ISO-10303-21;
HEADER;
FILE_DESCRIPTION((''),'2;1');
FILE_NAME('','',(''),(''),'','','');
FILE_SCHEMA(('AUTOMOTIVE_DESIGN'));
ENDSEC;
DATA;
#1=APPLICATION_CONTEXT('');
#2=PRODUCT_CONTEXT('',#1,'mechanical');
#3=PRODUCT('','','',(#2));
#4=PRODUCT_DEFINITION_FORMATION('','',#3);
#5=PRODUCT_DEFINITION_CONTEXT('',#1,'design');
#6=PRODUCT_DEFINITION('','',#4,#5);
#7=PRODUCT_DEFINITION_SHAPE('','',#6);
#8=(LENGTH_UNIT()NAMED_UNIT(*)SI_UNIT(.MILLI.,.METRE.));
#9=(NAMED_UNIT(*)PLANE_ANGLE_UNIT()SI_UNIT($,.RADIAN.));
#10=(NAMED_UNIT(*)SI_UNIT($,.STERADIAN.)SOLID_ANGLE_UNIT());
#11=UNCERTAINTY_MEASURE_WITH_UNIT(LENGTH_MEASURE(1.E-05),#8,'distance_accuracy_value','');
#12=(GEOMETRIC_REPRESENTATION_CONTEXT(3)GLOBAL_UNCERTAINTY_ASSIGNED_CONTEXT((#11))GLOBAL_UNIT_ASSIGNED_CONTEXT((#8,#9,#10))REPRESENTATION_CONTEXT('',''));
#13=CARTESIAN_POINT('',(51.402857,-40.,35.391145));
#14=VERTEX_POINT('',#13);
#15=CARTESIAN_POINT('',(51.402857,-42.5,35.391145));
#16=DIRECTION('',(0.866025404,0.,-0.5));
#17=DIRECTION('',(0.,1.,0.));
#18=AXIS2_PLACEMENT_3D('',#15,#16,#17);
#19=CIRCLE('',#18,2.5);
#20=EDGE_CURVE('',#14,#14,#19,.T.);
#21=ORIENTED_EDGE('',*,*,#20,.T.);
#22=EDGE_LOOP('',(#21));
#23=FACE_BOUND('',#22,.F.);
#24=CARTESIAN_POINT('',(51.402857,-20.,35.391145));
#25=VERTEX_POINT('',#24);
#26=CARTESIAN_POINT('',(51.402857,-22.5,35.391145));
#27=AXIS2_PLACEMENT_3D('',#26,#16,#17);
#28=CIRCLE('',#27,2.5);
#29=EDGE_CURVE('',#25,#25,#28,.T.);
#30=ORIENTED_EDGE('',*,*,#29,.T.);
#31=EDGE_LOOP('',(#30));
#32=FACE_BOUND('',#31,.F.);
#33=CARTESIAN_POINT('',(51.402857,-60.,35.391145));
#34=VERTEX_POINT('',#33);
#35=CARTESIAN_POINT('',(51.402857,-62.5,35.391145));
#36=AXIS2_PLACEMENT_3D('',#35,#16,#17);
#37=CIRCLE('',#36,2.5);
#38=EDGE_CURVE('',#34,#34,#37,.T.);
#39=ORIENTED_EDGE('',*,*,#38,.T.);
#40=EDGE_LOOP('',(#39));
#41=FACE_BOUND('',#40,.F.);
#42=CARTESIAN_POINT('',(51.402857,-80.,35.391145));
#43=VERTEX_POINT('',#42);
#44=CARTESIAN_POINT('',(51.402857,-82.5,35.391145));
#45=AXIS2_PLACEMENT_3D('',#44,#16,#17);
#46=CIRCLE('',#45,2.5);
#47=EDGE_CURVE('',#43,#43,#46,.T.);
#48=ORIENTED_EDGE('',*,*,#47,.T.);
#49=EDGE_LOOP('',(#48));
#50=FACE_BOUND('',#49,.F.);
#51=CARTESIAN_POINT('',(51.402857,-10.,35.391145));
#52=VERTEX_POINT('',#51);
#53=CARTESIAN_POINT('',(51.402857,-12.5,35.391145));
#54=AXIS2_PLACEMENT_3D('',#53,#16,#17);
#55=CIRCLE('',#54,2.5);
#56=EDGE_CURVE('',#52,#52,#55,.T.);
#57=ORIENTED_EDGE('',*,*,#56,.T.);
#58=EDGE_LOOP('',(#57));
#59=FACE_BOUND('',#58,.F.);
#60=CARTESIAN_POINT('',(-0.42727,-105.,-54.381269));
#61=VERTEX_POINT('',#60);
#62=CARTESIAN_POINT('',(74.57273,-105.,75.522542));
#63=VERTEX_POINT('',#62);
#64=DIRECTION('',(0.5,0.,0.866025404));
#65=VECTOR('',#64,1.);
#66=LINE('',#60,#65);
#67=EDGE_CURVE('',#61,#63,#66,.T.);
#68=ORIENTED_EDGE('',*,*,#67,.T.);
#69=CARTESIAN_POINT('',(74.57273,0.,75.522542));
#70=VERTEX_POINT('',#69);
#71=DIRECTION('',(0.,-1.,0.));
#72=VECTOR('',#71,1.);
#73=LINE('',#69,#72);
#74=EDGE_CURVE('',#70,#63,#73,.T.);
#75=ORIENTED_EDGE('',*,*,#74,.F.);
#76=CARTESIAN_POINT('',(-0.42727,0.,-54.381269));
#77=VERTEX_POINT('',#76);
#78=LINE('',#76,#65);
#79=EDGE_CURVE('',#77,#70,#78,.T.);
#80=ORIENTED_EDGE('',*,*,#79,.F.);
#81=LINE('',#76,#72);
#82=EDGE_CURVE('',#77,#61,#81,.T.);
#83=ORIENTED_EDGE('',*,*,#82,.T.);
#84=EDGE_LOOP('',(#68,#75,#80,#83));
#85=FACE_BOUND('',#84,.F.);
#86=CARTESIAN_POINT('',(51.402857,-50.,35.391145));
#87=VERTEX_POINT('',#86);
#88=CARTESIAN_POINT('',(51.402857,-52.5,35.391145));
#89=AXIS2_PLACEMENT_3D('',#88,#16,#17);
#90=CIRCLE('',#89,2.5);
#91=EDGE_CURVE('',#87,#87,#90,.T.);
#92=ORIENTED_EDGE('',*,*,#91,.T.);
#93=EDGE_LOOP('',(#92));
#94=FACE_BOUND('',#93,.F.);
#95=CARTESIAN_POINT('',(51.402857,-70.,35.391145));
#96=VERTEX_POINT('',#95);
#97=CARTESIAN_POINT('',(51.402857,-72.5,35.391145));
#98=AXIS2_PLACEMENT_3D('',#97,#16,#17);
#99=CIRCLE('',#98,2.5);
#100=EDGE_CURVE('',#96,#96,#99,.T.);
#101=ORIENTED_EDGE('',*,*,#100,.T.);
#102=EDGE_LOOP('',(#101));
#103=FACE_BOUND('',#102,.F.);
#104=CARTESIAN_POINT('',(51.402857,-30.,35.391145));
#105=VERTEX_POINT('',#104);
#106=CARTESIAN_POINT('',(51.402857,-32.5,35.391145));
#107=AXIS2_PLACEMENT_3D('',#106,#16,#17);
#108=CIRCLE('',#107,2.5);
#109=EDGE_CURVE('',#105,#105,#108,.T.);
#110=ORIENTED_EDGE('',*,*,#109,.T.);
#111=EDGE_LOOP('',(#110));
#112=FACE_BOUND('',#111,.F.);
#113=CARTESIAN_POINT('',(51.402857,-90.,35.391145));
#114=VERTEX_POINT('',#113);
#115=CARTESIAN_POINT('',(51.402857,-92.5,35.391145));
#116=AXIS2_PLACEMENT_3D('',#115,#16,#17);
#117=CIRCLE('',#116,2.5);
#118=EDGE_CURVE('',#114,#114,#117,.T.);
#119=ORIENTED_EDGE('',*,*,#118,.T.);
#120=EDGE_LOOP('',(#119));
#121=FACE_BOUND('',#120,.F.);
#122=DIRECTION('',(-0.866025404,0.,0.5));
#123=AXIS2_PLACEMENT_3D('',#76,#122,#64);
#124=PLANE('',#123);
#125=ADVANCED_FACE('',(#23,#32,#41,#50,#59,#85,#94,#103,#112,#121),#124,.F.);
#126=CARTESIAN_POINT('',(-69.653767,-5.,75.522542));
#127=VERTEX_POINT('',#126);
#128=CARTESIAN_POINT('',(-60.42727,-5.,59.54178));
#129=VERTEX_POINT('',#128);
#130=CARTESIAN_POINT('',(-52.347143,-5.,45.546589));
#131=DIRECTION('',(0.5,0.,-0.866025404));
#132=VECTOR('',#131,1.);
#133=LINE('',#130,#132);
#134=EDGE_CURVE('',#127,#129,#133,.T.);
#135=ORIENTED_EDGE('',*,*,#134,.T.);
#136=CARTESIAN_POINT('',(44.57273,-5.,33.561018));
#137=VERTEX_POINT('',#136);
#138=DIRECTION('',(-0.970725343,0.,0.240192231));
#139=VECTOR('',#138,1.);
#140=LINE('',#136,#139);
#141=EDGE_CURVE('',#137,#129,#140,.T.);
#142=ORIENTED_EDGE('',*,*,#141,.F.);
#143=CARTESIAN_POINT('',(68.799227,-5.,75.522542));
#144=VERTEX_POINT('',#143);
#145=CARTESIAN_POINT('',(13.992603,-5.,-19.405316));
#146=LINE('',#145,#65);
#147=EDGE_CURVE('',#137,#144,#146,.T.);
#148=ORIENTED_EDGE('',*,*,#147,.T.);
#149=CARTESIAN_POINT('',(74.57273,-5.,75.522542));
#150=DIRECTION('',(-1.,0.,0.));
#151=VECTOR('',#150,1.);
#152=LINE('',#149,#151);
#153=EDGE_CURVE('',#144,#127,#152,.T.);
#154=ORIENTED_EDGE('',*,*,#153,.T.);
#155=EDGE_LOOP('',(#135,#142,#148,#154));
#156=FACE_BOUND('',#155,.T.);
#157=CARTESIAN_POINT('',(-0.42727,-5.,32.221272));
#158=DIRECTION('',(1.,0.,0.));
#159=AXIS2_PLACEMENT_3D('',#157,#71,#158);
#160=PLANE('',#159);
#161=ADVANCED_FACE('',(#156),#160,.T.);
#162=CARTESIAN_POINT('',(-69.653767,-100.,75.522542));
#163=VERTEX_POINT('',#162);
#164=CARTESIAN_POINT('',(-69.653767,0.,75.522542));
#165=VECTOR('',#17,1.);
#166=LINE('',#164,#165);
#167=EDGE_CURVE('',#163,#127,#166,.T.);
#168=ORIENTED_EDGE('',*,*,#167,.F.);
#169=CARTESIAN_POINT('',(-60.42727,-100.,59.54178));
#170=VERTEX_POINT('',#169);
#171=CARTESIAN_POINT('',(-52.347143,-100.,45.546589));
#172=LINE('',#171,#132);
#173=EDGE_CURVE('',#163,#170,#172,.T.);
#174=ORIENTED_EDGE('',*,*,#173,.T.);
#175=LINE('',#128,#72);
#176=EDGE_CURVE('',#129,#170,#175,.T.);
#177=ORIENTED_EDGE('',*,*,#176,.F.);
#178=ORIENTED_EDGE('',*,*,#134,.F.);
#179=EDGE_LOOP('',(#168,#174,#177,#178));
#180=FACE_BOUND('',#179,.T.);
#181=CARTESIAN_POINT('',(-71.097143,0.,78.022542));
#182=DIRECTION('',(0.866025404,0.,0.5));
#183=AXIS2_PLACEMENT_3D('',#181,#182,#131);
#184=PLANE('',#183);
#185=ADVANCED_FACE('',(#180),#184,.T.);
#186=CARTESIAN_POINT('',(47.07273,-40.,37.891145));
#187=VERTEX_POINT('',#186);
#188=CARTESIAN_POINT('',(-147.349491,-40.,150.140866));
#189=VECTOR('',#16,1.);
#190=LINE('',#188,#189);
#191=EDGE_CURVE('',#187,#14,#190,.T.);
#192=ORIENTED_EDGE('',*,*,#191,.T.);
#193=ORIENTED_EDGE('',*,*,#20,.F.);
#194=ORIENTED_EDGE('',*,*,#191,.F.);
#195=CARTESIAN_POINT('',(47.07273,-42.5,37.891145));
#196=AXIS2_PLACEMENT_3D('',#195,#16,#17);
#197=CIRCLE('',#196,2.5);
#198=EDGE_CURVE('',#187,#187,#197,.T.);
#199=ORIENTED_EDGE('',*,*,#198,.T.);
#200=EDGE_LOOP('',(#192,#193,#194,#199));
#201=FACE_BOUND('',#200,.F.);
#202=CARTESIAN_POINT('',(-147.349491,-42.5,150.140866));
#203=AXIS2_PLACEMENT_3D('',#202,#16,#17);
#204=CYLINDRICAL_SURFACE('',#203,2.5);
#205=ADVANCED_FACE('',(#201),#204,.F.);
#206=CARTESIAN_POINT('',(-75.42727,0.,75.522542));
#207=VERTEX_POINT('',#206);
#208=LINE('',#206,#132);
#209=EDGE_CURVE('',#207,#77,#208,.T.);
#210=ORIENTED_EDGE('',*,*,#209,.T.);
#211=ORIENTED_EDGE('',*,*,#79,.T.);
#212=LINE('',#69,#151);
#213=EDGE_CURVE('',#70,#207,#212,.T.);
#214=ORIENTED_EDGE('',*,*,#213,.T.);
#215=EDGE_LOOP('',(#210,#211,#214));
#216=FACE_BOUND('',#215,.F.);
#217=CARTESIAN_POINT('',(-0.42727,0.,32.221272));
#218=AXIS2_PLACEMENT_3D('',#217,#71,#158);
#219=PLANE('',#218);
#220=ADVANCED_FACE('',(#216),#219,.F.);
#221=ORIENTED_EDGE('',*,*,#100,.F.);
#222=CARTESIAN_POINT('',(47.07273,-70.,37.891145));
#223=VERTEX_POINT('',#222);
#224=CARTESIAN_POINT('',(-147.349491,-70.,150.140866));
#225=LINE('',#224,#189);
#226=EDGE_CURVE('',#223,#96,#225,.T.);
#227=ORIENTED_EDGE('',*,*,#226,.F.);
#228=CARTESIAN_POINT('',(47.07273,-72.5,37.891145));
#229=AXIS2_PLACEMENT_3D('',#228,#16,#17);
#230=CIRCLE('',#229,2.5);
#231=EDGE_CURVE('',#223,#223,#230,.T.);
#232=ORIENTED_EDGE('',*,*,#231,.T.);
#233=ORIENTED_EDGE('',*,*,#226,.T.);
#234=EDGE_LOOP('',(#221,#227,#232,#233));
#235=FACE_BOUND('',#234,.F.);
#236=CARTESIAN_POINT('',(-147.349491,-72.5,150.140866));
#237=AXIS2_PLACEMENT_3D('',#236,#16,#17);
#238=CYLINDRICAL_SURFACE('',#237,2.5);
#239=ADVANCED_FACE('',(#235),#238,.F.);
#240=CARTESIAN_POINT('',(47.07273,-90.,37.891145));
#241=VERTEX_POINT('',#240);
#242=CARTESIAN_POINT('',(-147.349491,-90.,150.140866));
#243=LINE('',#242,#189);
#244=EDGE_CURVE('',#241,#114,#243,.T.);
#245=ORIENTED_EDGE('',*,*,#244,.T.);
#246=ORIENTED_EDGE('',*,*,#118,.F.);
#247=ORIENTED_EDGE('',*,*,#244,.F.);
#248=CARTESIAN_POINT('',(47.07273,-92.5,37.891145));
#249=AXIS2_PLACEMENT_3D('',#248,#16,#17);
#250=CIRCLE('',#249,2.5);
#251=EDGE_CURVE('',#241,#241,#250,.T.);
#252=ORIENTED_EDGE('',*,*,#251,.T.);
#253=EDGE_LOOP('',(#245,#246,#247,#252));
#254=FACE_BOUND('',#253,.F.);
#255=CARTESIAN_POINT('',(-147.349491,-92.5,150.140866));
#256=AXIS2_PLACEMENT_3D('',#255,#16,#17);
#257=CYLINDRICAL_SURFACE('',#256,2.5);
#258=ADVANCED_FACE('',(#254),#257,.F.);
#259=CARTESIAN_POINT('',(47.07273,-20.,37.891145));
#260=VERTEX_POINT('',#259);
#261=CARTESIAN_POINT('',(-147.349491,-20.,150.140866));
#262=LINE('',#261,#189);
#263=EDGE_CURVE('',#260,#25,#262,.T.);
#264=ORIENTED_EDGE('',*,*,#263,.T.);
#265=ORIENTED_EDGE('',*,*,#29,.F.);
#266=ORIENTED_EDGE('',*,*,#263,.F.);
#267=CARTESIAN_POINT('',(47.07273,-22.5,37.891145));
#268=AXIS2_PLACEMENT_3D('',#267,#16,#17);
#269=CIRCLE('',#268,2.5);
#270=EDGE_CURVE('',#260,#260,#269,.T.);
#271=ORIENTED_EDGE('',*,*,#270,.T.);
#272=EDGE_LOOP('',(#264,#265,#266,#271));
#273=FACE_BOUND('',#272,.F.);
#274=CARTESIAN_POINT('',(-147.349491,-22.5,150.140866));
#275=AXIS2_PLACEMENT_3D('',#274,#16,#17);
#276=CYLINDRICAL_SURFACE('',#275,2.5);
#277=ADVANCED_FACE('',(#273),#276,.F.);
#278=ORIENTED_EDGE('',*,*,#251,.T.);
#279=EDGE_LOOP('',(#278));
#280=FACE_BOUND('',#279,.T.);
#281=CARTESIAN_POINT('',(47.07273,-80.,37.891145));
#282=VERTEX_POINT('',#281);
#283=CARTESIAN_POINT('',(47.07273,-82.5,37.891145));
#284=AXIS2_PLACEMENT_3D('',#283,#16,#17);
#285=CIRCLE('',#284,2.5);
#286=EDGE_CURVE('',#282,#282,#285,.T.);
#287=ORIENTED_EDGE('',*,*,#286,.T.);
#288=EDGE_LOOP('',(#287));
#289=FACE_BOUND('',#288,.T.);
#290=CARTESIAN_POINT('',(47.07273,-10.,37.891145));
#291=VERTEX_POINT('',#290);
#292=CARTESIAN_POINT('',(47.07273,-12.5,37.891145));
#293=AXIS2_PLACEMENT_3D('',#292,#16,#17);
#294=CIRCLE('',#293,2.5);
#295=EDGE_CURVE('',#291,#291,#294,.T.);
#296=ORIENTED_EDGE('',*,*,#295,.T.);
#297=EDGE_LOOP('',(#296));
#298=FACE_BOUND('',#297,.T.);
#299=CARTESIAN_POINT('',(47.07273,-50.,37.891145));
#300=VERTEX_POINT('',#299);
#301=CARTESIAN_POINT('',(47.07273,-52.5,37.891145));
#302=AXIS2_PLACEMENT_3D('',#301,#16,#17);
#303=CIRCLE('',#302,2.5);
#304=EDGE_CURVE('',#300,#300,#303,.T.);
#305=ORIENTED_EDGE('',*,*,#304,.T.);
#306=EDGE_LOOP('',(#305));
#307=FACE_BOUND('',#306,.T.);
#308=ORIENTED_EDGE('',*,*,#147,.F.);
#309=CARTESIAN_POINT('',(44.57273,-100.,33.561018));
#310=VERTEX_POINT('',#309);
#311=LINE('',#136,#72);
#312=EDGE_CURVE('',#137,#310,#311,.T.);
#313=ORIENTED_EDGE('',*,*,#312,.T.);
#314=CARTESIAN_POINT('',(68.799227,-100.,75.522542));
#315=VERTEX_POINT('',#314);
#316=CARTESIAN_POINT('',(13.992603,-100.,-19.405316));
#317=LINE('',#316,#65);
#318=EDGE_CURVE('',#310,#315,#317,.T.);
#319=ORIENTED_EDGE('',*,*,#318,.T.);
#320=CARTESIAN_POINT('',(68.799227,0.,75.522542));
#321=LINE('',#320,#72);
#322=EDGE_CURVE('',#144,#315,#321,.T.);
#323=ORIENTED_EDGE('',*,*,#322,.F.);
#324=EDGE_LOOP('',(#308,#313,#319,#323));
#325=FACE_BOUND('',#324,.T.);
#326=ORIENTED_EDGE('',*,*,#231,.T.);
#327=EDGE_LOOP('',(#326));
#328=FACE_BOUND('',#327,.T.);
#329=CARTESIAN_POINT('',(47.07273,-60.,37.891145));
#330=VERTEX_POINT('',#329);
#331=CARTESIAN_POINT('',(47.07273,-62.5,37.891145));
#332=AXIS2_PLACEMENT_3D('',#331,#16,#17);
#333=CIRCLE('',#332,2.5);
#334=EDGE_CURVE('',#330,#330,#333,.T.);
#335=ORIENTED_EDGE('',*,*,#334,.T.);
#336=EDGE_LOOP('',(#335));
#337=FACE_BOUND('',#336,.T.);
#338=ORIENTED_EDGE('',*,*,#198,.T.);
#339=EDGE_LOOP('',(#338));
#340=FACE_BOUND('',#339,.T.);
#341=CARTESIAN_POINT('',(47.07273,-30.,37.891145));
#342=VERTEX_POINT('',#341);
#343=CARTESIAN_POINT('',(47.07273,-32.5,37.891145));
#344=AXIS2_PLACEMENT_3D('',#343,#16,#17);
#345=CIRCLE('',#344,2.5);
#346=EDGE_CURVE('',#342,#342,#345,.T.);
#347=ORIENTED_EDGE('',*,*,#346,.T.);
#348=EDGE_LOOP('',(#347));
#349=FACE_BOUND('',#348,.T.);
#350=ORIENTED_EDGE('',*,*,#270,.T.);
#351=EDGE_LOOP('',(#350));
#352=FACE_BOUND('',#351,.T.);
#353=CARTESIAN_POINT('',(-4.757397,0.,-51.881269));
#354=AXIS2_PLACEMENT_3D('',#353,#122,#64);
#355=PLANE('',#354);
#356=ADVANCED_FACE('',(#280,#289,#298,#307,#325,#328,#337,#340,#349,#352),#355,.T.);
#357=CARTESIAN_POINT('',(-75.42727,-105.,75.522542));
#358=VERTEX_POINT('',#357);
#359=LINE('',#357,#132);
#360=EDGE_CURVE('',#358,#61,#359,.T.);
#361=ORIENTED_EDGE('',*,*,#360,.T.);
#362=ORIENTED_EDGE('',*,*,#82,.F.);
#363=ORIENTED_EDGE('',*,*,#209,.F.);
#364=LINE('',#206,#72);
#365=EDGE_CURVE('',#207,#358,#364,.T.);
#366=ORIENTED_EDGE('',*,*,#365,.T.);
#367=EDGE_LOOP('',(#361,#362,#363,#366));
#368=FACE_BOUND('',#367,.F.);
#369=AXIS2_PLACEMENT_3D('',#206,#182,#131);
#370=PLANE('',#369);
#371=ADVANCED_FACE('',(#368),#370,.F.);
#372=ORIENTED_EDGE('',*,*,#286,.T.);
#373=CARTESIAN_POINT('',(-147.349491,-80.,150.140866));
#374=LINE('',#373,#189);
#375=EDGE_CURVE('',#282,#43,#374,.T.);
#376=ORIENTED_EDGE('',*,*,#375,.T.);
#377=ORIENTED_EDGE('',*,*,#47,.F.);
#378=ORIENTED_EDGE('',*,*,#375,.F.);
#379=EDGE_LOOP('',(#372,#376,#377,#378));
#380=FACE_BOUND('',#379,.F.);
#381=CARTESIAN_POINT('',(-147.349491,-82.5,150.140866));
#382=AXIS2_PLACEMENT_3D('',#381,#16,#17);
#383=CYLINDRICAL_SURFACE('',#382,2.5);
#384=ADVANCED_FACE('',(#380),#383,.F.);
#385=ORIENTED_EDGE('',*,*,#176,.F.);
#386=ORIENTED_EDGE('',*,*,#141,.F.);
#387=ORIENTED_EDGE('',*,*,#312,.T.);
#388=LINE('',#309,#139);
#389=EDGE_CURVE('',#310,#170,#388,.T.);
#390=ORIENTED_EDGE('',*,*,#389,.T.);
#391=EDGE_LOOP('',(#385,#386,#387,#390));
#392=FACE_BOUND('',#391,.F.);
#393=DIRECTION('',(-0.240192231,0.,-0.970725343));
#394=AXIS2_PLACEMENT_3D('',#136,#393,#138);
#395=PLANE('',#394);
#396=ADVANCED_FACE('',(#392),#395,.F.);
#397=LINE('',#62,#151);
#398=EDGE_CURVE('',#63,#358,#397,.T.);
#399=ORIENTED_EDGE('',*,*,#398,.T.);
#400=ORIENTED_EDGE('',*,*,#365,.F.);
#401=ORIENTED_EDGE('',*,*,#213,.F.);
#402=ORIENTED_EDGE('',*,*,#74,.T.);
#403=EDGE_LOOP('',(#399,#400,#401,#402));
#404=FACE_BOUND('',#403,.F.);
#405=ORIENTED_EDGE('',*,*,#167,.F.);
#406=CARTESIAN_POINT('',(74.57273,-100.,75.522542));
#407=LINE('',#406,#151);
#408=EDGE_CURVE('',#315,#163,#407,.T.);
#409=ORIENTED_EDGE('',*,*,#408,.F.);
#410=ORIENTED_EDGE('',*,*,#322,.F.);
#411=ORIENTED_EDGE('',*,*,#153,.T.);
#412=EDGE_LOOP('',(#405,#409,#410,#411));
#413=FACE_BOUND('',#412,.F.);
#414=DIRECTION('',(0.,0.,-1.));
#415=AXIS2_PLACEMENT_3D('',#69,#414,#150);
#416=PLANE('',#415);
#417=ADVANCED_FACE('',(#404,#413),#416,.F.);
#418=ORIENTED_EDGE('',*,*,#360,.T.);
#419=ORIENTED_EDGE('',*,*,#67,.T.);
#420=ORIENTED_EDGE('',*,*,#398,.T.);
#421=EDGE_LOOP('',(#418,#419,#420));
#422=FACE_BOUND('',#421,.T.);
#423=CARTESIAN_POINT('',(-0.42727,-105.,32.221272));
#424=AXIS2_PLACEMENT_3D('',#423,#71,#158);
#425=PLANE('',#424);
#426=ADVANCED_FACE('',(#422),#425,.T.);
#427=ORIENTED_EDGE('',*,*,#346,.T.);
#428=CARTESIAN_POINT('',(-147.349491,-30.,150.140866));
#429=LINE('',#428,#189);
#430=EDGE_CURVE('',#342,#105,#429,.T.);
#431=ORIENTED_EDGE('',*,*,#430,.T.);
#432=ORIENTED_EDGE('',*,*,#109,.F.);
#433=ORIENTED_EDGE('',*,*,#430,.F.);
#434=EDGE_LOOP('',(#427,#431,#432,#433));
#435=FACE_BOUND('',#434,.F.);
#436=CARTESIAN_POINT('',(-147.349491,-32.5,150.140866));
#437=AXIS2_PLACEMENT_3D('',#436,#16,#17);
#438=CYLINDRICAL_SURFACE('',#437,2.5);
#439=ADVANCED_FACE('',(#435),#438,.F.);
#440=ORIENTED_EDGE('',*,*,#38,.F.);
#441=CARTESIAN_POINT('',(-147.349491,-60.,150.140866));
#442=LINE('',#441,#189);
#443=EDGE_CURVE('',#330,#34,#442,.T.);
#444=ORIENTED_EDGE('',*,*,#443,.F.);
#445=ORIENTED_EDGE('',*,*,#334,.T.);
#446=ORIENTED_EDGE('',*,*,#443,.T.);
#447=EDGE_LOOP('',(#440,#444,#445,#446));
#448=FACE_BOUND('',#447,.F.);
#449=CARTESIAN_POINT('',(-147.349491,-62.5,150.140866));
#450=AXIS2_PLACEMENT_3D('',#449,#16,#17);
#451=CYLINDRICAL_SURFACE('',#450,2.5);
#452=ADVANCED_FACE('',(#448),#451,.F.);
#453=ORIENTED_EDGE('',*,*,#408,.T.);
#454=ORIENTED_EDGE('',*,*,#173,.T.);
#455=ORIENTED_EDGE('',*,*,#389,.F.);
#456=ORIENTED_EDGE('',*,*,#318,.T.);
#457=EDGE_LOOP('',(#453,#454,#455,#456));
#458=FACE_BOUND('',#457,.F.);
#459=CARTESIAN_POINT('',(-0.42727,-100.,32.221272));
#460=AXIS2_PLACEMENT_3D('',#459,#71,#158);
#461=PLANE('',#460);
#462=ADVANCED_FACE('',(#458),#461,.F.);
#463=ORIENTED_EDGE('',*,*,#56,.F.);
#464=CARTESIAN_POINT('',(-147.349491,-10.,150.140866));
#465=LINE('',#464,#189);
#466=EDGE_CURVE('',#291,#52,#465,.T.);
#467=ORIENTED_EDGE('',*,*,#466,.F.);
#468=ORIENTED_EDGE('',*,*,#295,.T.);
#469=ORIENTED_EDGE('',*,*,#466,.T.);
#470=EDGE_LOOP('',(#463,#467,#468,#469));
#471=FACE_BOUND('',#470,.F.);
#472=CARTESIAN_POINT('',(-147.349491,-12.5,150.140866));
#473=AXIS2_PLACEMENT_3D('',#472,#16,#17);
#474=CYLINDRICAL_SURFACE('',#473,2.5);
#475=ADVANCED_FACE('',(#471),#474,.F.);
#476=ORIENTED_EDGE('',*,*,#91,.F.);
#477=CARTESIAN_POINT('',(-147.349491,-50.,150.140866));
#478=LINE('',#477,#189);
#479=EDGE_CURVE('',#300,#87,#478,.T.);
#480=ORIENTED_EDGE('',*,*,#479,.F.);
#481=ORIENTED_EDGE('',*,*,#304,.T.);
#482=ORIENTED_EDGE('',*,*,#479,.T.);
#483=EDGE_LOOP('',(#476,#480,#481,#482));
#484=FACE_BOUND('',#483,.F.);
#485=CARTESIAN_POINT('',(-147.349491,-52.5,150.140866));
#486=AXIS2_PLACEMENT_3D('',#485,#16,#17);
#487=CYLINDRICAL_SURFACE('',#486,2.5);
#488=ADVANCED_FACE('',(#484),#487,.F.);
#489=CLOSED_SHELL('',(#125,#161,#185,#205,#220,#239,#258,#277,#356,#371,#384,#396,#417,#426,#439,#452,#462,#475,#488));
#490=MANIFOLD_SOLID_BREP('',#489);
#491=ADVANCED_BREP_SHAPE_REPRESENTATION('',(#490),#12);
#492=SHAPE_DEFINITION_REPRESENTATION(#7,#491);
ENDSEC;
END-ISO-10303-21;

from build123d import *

# Parameters (mm, degrees)
F1_DEPTH = 105
F2_T     = -5
F4_DEPTH = 95
F6_D     = 5


with BuildPart() as f1:
    # F0 (on Front) → F1 (new body)
    with BuildSketch(Plane.XZ):
        Polygon((74.5727300216, 75.5225419998), (-75.4272699784, 75.5225419998), (-0.4272699784, -54.3812685678), align=None)
    extrude(amount=F1_DEPTH)

    # F2
    f2_openings = [f1.faces().sort_by_distance(p)[0] for p in [
        (-0.42727, -52.5, 75.522542),
    ]]
    offset(amount=F2_T, openings=f2_openings)

    # F3 (on face) → F4 (join)
    with BuildSketch(Plane.XZ.offset(5)):
        Polygon((44.5727300216, 33.5610177728), (-60.4272699784, 59.5417798863), (-0.4272699784, -44.3812685678), align=None)
    extrude(amount=F4_DEPTH)

    # F6 (through all)
    with Locations(Plane(origin=(18.8972005322, 0, -10.9103038142), x_dir=(0, -1, 0), z_dir=(-0.8660254038, 0, 0.5))):
        with Locations((92.5, 56.3510589789), (82.5, 56.3510589789), (72.5, 56.3510589789), (62.5, 56.3510589789), (52.5, 56.3510589789), (42.5, 56.3510589789), (32.5, 56.3510589789), (22.5, 56.3510589789), (12.5, 56.3510589789)):
            Hole(F6_D / 2)


solid = f1.part
